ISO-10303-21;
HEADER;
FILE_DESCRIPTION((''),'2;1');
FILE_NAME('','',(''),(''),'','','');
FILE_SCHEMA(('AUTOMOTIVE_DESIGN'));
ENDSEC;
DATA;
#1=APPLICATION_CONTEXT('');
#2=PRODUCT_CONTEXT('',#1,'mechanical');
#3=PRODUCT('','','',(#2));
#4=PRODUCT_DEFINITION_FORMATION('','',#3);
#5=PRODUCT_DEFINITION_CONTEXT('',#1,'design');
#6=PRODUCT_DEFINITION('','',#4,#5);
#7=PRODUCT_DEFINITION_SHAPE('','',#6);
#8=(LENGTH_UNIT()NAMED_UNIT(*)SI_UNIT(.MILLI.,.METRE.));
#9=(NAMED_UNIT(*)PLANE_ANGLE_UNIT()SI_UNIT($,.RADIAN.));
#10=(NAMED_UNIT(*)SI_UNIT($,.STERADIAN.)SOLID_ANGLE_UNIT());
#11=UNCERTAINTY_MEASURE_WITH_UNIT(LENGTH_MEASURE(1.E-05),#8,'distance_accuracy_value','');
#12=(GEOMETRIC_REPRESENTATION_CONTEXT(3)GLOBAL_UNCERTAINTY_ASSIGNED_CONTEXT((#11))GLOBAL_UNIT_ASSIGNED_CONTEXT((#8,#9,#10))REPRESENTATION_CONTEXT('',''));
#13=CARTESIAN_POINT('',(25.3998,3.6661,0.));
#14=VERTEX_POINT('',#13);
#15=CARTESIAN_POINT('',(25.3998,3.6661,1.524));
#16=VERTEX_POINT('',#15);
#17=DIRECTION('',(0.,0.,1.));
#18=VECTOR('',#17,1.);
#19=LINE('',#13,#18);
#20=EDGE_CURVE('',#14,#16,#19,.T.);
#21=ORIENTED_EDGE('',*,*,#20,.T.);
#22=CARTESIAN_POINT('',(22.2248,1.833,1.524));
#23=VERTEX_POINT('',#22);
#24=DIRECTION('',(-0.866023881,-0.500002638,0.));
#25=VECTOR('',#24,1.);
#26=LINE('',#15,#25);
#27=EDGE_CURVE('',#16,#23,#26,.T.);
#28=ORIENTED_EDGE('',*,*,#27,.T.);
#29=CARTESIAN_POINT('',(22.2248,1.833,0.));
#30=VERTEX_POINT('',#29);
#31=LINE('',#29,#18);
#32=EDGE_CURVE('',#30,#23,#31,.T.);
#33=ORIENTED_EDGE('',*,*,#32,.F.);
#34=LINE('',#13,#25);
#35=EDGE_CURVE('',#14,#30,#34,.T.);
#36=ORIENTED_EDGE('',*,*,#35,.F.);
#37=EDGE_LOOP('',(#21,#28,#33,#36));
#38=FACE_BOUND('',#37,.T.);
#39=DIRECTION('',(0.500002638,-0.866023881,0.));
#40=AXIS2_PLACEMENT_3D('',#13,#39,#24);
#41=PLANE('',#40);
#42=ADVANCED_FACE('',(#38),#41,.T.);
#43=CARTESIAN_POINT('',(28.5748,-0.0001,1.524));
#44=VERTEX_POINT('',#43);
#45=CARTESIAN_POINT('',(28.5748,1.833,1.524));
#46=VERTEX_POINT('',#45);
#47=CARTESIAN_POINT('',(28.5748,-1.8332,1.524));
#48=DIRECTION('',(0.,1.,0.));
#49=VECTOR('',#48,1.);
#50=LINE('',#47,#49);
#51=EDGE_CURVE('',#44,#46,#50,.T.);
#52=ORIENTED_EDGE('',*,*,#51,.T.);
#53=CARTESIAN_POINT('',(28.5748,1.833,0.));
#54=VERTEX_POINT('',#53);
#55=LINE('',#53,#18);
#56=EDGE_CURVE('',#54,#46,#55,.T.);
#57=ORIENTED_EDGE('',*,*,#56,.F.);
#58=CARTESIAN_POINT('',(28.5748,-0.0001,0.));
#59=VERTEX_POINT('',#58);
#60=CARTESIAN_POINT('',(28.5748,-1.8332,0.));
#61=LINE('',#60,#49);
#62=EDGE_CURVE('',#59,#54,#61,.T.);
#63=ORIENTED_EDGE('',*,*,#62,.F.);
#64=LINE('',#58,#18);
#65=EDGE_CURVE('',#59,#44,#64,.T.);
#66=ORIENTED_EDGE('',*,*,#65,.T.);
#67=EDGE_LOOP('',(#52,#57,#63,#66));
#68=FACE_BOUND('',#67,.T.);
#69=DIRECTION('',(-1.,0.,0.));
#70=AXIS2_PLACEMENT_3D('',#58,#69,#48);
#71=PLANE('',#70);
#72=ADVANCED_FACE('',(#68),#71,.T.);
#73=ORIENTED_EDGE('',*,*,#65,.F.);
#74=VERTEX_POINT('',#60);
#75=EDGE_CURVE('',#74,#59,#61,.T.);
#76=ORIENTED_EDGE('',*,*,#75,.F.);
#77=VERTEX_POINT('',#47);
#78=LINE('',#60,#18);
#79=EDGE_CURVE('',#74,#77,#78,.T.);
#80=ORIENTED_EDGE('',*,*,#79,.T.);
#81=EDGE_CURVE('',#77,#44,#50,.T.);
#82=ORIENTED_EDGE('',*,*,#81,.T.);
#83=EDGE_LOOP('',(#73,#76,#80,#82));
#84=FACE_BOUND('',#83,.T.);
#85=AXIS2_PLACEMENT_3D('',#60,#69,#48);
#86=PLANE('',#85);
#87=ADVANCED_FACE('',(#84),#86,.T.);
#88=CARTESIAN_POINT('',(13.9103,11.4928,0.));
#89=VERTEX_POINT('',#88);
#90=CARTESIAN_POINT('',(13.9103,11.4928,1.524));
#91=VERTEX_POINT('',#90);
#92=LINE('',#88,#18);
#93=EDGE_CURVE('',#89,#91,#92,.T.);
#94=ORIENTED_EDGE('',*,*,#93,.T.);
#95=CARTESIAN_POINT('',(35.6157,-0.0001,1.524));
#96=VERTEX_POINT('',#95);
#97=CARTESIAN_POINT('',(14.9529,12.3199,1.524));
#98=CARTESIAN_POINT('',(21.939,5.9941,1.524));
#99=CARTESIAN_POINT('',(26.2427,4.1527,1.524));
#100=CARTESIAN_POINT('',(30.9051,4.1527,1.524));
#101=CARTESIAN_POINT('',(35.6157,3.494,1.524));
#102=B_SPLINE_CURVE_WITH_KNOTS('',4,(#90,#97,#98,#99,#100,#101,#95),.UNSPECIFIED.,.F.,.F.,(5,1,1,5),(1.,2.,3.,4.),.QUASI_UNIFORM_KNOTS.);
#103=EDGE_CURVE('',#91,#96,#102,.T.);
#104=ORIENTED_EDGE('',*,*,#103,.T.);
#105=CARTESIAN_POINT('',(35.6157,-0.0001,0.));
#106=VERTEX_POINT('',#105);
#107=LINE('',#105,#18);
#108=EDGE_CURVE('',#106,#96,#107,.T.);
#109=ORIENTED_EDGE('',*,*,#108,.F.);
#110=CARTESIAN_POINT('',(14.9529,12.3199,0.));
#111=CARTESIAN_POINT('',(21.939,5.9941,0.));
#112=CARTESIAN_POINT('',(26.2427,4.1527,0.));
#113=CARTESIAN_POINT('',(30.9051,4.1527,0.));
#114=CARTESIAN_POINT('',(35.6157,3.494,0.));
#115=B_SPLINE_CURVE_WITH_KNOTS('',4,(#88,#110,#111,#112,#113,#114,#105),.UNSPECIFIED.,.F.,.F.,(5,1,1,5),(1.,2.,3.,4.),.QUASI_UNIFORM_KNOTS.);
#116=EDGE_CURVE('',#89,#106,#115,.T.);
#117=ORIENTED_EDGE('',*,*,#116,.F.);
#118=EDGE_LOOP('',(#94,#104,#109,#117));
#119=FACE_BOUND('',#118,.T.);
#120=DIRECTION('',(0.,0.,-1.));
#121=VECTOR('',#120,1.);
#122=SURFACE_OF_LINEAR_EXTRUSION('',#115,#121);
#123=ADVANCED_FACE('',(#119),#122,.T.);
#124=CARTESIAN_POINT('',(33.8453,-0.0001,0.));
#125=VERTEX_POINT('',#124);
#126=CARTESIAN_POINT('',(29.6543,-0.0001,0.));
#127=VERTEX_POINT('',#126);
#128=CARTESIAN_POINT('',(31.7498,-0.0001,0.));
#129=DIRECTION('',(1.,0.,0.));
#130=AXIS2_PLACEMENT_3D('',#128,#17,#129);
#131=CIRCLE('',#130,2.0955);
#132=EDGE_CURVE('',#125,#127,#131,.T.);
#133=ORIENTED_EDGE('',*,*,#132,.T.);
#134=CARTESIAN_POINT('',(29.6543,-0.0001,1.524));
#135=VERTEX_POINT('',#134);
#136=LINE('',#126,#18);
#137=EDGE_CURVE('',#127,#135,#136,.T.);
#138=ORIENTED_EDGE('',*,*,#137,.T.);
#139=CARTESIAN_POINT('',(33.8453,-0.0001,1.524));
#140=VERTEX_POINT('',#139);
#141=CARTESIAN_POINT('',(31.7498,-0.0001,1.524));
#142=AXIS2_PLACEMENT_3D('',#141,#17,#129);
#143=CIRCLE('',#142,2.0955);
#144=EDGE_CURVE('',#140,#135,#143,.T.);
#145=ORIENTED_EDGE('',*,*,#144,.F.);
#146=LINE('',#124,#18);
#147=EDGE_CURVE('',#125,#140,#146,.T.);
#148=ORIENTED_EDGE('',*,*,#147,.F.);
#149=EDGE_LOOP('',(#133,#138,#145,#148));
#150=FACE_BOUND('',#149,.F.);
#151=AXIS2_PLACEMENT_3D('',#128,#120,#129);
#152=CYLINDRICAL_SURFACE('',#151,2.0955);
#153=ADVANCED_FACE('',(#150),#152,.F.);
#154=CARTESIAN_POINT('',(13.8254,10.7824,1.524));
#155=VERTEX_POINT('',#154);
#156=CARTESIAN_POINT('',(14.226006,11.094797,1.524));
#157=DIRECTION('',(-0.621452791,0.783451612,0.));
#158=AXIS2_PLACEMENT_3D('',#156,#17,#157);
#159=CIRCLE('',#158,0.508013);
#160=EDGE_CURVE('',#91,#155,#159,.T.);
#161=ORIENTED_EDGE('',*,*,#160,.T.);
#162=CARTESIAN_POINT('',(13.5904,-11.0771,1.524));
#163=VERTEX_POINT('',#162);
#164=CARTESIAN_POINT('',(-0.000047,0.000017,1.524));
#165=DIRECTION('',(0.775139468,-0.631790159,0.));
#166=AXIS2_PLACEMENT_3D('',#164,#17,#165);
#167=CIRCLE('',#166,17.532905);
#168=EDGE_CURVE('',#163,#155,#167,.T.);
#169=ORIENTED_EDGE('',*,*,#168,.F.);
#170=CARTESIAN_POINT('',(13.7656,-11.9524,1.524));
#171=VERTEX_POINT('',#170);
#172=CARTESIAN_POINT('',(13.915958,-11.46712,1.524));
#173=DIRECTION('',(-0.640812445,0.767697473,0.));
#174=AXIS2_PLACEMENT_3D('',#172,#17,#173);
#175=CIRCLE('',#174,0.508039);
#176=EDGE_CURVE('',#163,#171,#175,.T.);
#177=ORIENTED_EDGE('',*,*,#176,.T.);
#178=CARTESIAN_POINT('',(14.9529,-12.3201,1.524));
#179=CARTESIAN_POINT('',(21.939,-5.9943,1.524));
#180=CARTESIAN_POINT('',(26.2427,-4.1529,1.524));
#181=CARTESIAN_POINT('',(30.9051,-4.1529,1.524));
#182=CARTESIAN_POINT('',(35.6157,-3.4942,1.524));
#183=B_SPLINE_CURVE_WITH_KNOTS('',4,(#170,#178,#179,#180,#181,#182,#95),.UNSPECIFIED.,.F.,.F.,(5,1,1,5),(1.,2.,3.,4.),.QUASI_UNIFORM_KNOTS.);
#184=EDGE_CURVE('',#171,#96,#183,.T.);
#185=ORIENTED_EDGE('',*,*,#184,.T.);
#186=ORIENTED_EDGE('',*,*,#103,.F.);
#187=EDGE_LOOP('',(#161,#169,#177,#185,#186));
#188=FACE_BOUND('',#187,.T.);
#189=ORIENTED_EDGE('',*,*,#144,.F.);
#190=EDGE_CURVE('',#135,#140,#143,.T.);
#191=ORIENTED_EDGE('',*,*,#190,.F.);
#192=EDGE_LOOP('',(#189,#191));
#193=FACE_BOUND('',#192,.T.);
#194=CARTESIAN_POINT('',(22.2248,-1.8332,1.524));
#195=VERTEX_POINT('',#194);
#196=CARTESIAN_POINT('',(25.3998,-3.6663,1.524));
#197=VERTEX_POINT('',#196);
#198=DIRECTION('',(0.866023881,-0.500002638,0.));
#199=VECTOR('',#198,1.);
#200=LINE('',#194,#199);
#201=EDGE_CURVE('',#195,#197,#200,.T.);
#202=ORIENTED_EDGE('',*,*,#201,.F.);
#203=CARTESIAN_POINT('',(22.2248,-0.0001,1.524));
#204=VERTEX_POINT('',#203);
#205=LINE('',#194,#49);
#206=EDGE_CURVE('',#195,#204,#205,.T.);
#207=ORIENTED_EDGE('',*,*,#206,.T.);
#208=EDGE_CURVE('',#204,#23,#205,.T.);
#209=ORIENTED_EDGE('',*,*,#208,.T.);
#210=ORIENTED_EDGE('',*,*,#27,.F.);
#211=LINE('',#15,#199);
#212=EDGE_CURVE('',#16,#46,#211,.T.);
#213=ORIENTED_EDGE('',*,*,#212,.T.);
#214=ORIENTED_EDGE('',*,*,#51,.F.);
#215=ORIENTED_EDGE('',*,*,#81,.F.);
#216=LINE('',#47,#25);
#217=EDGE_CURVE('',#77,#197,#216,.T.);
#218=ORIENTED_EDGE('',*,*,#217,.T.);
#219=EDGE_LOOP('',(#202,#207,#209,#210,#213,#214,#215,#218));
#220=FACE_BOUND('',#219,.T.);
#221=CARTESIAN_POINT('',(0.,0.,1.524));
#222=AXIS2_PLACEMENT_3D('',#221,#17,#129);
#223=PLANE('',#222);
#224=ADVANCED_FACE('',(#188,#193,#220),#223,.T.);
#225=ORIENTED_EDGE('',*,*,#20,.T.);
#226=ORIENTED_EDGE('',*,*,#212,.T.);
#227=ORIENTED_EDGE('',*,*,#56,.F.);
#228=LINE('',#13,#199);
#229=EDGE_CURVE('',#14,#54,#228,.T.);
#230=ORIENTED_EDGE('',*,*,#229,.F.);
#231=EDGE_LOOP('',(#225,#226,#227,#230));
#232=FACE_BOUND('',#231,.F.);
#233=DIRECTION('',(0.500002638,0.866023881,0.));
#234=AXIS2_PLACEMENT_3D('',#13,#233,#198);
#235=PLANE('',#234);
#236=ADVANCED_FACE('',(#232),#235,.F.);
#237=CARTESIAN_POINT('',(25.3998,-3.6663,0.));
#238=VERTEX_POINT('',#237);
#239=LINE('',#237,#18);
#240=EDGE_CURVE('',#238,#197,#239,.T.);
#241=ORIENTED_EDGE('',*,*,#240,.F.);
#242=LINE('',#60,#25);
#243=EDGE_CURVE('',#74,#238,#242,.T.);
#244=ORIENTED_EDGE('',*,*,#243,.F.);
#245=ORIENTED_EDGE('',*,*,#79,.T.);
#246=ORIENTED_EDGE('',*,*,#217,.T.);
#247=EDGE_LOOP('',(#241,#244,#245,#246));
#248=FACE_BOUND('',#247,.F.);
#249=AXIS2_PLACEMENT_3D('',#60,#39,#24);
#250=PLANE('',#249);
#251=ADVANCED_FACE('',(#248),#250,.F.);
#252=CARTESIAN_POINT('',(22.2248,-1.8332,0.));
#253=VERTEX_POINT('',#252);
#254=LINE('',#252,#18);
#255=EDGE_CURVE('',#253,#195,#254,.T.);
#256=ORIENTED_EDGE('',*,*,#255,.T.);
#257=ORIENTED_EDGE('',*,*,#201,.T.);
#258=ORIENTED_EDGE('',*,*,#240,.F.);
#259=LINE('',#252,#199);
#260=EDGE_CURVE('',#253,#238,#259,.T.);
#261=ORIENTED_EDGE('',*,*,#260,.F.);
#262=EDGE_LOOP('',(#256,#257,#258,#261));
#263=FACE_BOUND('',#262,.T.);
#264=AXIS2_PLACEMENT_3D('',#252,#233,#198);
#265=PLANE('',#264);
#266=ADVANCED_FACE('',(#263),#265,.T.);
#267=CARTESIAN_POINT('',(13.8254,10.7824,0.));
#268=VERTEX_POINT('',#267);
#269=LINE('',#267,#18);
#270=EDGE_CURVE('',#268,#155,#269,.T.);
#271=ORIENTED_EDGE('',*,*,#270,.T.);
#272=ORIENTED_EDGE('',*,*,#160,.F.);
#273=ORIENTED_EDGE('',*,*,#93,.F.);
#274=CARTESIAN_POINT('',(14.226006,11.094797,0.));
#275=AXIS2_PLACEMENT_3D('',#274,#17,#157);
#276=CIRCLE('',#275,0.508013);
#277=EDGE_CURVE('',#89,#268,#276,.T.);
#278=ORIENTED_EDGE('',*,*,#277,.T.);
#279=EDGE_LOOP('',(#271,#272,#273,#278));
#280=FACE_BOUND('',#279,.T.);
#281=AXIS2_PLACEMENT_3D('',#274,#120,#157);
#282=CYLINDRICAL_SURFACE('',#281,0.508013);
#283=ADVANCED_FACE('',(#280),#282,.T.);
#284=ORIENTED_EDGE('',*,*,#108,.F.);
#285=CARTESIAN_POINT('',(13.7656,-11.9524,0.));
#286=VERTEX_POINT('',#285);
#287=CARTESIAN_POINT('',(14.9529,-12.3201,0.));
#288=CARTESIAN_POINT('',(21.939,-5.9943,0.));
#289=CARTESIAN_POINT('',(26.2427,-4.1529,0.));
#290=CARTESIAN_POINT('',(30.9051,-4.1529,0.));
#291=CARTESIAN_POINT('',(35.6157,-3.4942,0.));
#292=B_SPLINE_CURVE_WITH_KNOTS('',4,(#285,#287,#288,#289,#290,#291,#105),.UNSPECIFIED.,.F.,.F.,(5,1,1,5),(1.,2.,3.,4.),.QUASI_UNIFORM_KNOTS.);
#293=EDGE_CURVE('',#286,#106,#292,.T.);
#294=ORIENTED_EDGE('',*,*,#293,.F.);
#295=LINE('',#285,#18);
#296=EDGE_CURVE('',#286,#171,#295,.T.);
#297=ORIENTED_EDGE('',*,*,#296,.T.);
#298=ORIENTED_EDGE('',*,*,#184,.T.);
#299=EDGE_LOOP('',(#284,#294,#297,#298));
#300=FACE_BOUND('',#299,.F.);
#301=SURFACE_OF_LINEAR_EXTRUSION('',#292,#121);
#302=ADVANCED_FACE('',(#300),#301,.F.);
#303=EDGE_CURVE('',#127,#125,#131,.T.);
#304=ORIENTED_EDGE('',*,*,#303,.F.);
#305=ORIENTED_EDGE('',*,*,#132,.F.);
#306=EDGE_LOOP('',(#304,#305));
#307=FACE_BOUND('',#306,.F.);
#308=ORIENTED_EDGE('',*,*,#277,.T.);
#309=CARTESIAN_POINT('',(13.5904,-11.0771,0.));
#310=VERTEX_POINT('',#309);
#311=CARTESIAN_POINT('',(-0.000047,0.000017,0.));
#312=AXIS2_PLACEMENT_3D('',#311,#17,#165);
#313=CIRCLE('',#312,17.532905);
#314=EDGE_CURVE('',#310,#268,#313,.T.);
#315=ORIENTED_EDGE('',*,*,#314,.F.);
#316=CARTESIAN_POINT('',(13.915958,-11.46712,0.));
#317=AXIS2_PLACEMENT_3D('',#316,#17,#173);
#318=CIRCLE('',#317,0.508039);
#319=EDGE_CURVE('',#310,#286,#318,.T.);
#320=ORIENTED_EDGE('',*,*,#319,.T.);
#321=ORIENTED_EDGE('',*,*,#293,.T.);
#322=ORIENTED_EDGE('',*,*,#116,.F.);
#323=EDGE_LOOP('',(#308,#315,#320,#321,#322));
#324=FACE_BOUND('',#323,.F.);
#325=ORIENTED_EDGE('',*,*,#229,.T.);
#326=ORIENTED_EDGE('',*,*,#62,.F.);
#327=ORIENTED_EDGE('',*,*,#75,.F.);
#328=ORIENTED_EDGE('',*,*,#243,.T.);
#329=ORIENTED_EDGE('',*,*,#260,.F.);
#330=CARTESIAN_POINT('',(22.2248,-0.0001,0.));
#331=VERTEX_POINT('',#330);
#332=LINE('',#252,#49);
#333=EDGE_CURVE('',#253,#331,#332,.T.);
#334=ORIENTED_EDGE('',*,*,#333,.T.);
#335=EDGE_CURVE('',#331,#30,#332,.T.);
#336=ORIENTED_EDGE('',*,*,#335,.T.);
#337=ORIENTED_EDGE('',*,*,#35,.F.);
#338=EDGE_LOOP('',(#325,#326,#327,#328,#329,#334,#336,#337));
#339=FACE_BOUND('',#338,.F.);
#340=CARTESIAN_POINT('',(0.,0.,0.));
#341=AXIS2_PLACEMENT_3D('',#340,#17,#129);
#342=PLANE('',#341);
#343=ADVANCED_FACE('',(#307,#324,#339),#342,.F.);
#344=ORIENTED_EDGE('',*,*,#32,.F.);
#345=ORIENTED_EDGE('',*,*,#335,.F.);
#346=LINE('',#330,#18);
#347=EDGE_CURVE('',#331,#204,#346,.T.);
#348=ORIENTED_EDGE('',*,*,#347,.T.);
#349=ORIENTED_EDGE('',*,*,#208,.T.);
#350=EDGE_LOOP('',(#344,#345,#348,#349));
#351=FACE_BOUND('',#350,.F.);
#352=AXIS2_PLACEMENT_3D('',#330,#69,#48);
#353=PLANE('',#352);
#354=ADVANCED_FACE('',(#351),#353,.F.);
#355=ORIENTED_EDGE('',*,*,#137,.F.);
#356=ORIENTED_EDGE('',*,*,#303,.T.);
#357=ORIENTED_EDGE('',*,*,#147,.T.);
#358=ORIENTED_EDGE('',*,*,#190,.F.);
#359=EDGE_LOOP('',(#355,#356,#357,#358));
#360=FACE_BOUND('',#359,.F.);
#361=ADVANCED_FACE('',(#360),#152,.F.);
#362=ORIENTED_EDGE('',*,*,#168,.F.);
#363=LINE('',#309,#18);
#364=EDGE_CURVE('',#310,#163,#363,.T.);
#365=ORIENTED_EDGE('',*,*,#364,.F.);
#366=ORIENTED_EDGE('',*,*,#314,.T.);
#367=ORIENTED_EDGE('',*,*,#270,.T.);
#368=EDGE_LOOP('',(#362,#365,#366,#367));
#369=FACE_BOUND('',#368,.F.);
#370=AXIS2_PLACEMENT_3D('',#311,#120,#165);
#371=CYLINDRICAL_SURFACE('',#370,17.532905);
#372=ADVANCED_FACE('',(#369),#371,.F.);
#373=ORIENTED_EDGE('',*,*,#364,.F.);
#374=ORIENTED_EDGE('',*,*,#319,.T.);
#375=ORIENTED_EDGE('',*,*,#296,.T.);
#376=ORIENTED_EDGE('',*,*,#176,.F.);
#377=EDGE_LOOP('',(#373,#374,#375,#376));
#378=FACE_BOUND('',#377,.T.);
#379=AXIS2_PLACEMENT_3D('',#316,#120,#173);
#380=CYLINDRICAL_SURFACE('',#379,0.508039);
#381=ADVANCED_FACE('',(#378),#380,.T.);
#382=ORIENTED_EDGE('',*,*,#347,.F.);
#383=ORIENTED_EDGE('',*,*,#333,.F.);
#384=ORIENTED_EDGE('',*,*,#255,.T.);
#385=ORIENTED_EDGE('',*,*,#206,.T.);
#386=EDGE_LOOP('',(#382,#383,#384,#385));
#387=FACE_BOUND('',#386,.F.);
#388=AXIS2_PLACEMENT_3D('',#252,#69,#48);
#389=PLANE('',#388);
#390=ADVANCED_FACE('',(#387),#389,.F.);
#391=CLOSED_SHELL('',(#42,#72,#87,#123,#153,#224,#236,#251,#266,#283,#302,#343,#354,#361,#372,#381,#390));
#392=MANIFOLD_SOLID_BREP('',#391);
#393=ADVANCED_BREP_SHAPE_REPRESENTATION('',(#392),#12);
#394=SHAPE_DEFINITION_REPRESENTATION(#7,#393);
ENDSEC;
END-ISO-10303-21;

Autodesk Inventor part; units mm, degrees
ref_plane "YZ Plane" through (0, 0, 0) normal (1, 0, 0) x (0, 1, 0)
ref_plane "XZ Plane" through (0, 0, 0) normal (0, 1, 0) x (-1, 0, 0)
ref_plane "XY Plane" through (0, 0, 0) normal (0, 0, 1) x (1, 0, 0)
sketch "Sketch1" plane through (0, 0, 0) normal (0, 0, 1) x (1, 0, 0)
  line L0 (25.3998, 3.6661) -> (28.5748, 1.833)
  line L1 (28.5748, -1.8332) -> (28.5748, 1.833)
  line L2 (28.5748, -1.8332) -> (25.3998, -3.6663)
  line L3 (22.2248, -1.8332) -> (25.3998, -3.6663)
  line L4 (22.2248, -1.8332) -> (22.2248, 1.833)
  line L5 (25.3998, 3.6661) -> (22.2248, 1.833)
  arc A0 (13.9103, 11.4928) -> (13.8254, 10.7824) centre (14.226, 11.0948) ccw
  arc A1 (13.5904, -11.0771) -> (13.7656, -11.9524) centre (13.9159, -11.4671) ccw
  arc A2 (13.5904, -11.0771) -> (13.8254, 10.7824) centre (0, 0) ccw
  circle A3 centre (31.7498, -0.0001) radius 2.0955
  line L6 (31.7498, -0.0001) -> (19.0498, -0.0001)
  line L7 (13.9103, 11.4928) -> (14.9529, 12.3199) construction
  line L8 (14.9529, 12.3199) -> (21.939, 5.9941) construction
  line L9 (21.939, 5.9941) -> (26.2427, 4.1527) construction
  line L10 (26.2427, 4.1527) -> (30.9051, 4.1527) construction
  line L11 (30.9051, 4.1527) -> (35.6157, 3.494) construction
  line L12 (35.6157, 3.494) -> (35.6157, -0.0001) construction
  spline S0 degree 4 poles (13.9103, 11.4928) (14.9529, 12.3199) (21.939, 5.9941) (26.2427, 4.1527) (30.9051, 4.1527) (35.6157, 3.494) (35.6157, -0.0001) knots 1 1 1 1 1 2 3 4 4 4 4 4
  line L13 (13.7656, -11.9524) -> (14.9529, -12.3201) construction
  line L14 (14.9529, -12.3201) -> (21.939, -5.9943) construction
  line L15 (21.939, -5.9943) -> (26.2427, -4.1529) construction
  line L16 (26.2427, -4.1529) -> (30.9051, -4.1529) construction
  line L17 (30.9051, -4.1529) -> (35.6157, -3.4942) construction
  line L18 (35.6157, -3.4942) -> (35.6157, -0.0001) construction
  spline S1 degree 4 poles (13.7656, -11.9524) (14.9529, -12.3201) (21.939, -5.9943) (26.2427, -4.1529) (30.9051, -4.1529) (35.6157, -3.4942) (35.6157, -0.0001) knots 1 1 1 1 1 2 3 4 4 4 4 4
  point P0 (0, 0)
  point P1 (16.4691, 5.9941)
  point P2 (16.469, -5.9943)
  point P3 (25.3998, -0.0001)
  dimension "d31" = 3.6662
  dimension "d32" = 3.6662
  dimension "d34" = 3.6662
  dimension "d35" = 3.6662
  dimension "d36" = 3.6662
  dimension "d37" = 3.6662
  dimension "d44" = 4.191
extrude "Extrusion6" add sketch "Sketch1" along normal blind 1.524
equation "\"d32\" = d31"
equation "\"d34\" = d31"
equation "\"d35\" = d31"
equation "\"d36\" = d31"
equation "\"d37\" = d31"
properties part number "gear-interface"
